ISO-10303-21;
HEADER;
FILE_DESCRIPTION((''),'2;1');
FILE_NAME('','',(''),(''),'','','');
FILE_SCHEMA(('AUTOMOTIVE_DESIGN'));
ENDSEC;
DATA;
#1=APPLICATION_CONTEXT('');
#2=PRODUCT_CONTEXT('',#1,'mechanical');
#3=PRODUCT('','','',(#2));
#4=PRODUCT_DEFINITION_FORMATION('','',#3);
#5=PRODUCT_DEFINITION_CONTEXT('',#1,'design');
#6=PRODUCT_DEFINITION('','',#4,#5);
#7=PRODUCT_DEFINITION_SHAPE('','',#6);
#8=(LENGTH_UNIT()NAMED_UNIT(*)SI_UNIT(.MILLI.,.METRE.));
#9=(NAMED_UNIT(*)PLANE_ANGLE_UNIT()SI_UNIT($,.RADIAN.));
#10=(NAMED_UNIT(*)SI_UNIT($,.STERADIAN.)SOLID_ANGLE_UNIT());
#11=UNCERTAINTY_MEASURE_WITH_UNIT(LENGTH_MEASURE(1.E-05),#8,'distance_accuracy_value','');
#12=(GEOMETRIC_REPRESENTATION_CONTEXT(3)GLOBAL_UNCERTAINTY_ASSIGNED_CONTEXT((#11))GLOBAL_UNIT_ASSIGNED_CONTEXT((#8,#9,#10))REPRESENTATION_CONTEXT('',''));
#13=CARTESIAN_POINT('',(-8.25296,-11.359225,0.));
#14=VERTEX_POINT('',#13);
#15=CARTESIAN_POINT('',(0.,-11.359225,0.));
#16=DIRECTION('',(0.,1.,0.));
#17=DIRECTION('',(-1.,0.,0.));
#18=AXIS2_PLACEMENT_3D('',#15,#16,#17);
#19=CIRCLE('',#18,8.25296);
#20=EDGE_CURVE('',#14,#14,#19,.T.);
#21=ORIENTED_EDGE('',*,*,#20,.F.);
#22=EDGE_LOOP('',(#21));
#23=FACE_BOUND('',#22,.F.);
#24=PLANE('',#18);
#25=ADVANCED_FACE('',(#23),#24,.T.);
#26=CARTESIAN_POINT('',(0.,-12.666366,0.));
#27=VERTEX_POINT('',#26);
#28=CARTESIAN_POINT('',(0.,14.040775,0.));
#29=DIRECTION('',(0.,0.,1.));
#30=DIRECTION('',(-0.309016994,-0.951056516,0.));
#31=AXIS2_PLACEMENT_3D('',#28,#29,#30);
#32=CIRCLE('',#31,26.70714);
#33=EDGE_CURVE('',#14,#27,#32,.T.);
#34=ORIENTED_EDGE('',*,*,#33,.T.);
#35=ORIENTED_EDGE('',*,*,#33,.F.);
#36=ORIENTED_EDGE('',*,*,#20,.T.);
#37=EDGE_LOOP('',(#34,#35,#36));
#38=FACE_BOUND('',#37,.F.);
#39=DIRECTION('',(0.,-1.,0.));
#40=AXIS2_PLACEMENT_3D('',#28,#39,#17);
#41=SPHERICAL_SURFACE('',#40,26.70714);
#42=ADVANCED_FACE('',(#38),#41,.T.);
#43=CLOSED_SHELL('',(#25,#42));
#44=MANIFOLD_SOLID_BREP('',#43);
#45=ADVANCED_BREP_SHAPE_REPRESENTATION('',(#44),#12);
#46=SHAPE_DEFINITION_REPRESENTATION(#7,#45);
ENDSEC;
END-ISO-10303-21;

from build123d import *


# Not quite as in the source:
# - the program builds the solid bodies; features that only make, move or delete a surface that nothing else refers to are left out


with BuildPart() as f2:
    # F0 (on Top) → F2 (revolve)
    with BuildSketch(Plane.XY):
        with BuildLine():
            Line((0, -11.3592253257), (-8.2529602843, -11.3592253257))
            ThreePointArc((-8.2529602843, -11.3592253257), (-4.1779172362, -12.3375566039), (0, -12.6663658214))
            Line((0, -12.6663658214), (0, -11.3592253257))
        make_face()
    revolve(axis=Axis((0, -12.0127955735, 0), (0, 1, 0)))


solid = f2.part
